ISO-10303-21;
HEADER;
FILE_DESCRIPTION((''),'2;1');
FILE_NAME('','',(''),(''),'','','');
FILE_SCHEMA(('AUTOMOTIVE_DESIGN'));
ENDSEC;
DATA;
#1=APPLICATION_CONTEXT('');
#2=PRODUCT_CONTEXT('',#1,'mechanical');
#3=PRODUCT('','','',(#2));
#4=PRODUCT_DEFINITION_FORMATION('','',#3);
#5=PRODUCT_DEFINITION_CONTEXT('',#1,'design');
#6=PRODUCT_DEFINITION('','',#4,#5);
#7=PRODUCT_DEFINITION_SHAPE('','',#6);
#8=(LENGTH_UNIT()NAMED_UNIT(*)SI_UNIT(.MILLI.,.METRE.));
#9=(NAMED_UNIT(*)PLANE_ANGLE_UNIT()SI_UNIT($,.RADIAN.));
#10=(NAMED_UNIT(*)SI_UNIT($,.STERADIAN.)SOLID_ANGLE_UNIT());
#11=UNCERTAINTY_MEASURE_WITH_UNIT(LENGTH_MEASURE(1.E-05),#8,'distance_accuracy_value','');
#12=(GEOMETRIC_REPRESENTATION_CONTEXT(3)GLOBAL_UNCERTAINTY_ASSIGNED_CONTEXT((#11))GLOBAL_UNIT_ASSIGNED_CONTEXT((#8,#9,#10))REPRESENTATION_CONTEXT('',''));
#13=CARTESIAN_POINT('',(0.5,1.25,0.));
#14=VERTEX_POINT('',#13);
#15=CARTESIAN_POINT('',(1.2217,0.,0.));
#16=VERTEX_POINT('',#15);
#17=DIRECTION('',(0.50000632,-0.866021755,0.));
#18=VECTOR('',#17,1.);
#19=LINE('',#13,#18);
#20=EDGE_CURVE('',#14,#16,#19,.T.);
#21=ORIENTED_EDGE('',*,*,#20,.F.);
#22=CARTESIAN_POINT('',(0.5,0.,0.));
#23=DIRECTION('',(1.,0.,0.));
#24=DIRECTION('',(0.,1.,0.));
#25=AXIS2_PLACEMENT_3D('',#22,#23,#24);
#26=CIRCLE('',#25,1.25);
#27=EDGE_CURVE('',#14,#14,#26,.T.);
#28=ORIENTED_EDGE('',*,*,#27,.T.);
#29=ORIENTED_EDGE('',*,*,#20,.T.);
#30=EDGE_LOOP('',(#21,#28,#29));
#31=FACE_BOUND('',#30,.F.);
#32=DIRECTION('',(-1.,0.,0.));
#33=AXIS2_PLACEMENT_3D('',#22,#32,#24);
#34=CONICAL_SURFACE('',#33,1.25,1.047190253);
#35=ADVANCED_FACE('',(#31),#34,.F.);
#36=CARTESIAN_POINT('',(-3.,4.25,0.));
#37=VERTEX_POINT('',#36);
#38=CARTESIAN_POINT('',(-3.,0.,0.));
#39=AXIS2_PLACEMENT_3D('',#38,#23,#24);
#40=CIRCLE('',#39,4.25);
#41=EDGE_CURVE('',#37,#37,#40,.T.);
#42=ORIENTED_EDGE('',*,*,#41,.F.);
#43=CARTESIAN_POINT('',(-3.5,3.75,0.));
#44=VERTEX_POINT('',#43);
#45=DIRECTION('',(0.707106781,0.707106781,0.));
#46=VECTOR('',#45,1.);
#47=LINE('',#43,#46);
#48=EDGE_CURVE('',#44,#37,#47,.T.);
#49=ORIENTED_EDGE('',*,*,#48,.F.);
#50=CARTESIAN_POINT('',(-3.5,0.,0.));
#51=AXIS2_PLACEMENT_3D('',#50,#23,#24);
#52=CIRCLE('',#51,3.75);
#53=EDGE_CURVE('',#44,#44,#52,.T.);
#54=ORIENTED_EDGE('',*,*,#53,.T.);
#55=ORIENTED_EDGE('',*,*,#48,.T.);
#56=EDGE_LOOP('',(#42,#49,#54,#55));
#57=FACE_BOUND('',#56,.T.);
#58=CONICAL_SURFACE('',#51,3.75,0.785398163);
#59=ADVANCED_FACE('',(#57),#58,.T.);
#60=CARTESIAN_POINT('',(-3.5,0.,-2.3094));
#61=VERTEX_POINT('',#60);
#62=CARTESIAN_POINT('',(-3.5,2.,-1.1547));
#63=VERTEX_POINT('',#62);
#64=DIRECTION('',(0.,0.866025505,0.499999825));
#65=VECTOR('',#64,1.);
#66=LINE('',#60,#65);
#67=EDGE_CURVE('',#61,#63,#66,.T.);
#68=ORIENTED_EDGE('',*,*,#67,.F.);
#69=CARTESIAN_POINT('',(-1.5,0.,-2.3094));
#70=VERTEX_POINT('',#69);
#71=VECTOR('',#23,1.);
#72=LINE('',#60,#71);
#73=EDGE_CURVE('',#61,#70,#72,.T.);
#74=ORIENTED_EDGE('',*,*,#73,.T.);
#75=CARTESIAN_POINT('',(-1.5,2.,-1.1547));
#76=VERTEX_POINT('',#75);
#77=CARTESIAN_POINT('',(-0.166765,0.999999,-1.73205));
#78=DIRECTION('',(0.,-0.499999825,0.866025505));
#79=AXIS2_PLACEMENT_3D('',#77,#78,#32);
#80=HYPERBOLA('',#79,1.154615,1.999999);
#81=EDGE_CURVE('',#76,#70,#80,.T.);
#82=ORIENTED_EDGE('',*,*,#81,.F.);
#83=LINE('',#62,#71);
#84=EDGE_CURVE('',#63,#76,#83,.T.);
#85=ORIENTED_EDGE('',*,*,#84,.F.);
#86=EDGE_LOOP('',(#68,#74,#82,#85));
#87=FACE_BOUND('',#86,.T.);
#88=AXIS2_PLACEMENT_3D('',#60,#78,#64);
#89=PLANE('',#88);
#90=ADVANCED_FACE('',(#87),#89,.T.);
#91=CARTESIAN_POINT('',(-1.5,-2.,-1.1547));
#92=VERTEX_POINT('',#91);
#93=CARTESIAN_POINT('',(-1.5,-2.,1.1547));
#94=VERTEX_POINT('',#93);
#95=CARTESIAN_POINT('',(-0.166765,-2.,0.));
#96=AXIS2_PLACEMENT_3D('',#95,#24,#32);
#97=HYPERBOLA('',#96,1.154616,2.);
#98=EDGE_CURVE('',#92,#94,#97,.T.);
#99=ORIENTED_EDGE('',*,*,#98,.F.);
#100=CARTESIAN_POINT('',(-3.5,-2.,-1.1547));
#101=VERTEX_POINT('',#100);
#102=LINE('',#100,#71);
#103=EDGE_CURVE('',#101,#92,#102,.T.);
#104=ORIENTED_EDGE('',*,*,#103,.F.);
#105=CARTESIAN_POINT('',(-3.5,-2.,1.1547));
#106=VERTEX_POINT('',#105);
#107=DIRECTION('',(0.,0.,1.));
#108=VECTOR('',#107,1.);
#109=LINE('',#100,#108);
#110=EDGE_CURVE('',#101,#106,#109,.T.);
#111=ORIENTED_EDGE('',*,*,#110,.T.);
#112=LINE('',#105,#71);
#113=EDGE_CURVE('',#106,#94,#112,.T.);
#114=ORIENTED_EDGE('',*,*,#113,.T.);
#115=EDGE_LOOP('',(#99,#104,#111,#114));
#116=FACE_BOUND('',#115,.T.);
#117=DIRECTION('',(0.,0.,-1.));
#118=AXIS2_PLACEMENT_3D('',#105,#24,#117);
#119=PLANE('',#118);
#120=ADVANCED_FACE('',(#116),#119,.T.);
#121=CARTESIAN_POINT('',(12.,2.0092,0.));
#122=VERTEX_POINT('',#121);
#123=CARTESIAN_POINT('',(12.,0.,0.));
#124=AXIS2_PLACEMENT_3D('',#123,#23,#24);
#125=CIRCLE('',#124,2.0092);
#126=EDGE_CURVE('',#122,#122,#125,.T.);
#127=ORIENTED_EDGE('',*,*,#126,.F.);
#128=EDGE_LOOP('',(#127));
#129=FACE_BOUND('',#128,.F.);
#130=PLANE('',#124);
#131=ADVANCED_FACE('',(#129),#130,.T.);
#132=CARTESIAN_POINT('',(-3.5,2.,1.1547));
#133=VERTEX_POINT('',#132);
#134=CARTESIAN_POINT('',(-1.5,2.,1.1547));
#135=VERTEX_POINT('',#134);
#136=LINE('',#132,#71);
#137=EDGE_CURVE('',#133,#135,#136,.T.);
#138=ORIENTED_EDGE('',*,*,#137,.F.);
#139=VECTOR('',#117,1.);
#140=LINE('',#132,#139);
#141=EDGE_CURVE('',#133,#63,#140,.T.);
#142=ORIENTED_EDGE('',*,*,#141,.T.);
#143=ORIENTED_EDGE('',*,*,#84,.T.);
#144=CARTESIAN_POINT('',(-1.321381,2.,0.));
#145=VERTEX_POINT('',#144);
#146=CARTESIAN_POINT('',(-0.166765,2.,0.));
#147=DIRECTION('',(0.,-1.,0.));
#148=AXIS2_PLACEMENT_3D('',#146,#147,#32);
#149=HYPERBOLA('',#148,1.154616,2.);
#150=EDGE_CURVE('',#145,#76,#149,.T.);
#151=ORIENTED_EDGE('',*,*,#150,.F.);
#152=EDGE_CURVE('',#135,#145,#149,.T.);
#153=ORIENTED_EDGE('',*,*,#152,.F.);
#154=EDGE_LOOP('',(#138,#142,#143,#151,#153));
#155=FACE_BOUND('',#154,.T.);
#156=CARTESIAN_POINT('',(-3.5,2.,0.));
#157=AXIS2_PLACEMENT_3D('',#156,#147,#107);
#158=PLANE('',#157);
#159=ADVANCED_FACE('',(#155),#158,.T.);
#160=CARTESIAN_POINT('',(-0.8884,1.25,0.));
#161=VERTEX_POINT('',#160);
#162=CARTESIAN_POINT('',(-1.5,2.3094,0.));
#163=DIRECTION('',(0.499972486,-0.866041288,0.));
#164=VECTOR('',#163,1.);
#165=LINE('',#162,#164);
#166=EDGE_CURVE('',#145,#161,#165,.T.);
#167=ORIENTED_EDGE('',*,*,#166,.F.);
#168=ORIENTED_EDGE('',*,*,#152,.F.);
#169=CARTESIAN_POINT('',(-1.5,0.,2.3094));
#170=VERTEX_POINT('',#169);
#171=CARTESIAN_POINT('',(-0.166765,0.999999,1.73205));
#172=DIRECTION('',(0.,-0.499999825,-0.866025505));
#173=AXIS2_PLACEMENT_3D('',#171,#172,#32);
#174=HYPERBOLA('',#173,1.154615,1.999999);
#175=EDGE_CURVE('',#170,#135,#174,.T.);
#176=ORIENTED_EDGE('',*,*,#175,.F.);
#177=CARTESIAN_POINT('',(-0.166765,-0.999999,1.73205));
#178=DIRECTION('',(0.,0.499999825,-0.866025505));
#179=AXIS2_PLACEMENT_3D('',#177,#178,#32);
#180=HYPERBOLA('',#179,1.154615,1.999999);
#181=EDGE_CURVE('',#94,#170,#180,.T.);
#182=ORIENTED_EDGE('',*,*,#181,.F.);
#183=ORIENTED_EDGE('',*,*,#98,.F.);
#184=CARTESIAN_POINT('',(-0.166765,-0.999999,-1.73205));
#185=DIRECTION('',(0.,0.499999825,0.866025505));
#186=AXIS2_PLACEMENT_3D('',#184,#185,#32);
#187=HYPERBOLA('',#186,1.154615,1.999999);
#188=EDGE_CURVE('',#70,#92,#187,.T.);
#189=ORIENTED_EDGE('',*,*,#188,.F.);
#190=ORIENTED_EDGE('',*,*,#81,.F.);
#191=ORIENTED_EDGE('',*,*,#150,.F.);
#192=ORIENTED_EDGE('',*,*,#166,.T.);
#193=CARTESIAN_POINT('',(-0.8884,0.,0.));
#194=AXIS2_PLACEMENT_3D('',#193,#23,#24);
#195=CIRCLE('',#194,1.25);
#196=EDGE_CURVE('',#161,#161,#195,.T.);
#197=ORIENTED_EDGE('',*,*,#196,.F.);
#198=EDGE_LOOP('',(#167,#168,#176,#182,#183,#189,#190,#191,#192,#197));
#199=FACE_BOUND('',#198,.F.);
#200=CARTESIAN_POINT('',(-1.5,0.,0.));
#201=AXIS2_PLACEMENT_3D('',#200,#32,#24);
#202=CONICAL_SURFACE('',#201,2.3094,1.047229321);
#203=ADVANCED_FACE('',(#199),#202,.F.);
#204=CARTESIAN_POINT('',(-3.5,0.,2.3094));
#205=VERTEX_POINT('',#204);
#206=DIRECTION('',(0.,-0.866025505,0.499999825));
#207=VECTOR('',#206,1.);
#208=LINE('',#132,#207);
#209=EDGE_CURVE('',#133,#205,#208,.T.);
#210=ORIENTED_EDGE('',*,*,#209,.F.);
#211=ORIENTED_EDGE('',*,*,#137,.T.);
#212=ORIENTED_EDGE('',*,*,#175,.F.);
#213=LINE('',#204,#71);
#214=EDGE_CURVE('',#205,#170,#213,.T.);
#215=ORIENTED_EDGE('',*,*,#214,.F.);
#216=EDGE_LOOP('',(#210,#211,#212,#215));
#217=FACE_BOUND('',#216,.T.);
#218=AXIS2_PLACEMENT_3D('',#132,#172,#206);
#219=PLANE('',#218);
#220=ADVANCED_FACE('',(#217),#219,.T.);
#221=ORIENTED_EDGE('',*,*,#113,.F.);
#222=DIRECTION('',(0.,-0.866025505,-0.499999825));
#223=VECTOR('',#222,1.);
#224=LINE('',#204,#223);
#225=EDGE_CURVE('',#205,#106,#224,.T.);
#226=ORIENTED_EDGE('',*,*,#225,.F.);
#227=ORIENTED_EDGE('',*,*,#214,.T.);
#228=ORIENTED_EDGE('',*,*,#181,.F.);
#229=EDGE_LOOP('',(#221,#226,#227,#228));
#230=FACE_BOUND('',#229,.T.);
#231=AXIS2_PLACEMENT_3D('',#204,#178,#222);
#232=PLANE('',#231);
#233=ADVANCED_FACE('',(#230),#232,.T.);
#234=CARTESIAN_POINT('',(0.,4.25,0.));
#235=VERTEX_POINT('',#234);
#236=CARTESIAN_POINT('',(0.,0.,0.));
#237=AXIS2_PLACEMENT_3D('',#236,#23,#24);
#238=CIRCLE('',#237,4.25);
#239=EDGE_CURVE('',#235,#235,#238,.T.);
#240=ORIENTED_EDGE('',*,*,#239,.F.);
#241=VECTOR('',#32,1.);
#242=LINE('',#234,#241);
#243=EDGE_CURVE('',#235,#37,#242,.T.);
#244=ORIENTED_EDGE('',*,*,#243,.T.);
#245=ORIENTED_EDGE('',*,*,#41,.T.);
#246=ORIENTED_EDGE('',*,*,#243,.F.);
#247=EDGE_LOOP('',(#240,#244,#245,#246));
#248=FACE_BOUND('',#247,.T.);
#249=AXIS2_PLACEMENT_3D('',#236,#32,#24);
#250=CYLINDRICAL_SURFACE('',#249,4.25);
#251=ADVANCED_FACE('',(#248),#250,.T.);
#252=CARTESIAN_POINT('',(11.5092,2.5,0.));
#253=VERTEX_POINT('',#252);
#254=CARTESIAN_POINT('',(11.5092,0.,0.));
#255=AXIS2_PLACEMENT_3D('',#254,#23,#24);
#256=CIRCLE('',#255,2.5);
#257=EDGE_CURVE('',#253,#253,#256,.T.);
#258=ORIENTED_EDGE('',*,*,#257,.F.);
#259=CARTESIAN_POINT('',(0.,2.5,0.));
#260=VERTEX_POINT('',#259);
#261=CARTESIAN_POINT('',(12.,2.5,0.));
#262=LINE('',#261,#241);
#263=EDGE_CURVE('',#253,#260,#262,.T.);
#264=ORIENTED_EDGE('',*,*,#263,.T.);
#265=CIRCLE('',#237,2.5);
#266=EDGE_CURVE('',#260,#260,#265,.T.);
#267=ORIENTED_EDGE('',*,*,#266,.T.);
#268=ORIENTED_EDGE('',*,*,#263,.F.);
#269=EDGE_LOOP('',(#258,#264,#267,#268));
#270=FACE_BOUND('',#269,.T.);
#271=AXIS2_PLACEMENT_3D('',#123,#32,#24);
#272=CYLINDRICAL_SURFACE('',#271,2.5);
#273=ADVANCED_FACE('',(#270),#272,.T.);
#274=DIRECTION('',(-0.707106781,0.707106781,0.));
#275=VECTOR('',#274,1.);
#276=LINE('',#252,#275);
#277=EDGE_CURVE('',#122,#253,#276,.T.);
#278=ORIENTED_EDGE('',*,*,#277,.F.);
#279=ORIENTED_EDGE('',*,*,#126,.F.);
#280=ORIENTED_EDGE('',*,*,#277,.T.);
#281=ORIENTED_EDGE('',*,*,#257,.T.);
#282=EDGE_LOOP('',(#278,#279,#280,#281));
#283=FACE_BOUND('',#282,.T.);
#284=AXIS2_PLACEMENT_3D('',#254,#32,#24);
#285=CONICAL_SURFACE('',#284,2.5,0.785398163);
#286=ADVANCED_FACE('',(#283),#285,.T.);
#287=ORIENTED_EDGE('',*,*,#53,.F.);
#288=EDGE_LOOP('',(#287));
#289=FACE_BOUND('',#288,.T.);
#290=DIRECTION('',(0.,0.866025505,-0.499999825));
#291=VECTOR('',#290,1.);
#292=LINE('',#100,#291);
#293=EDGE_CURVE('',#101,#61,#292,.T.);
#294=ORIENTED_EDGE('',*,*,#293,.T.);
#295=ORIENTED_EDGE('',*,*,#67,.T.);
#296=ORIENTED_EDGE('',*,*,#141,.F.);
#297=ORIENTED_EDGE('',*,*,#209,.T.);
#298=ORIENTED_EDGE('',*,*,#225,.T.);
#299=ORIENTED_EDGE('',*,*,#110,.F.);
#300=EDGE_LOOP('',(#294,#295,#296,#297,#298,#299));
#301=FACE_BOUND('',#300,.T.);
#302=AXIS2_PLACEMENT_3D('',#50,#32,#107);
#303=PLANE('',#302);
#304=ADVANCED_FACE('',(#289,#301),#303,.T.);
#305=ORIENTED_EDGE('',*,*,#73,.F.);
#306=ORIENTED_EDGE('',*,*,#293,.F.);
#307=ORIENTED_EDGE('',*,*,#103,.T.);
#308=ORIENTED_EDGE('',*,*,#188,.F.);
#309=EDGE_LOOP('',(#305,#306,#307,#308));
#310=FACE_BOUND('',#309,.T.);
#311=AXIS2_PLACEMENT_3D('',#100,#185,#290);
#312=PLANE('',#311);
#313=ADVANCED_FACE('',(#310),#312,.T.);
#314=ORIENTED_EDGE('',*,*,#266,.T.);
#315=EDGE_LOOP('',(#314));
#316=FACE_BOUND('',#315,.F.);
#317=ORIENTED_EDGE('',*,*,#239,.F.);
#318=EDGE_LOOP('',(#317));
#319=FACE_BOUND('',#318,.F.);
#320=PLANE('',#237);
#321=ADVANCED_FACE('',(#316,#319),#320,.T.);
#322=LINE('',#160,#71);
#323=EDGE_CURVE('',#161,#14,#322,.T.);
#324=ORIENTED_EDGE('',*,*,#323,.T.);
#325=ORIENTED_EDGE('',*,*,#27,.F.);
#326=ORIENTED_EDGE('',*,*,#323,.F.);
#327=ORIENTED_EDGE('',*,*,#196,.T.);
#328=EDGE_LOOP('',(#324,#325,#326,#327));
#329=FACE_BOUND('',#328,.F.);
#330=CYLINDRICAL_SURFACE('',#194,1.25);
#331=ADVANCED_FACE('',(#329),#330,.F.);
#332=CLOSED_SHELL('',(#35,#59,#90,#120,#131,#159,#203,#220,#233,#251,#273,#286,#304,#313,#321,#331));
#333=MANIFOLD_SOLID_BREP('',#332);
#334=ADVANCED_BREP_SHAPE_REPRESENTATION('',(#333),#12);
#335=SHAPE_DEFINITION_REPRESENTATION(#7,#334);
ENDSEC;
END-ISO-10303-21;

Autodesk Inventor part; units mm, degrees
ref_plane "YZ Plane" through (0, 0, 0) normal (1, 0, 0) x (0, 1, 0)
ref_plane "XZ Plane" through (0, 0, 0) normal (0, 1, 0) x (-1, 0, 0)
sketch "Sketch1" plane through (0, 0, 0) normal (0, 0, 1) x (1, 0, 0)
  line L0 (1.2217, 0) -> (12, 0)
  line L1 (12, 0) -> (12, 2.5)
  line L2 (12, 2.5) -> (0, 2.5)
  line L3 (0, 2.5) -> (0, 4.25)
  line L4 (0, 4.25) -> (-3.5, 4.25)
  line L5 (-3.5, 4.25) -> (-3.5, 2.3094)
  line L6 (-3.5, 2.3094) -> (-1.5, 2.3094)
  line L7 (-1.5, 2.3094) -> (-0.8884, 1.25)
  line L8 (-6.6, 0) -> (15.1, 0) projected
  line L9 (0, -0.85) -> (0, 5.1) projected
  line L10 (-0.8884, 1.25) -> (0.5, 1.25)
  line L11 (0.5, 1.25) -> (1.2217, 0)
  line L12 (-3.5, 2.3094) -> (-3.5, 0) construction
  line L13 (-3.5, 3.75) -> (-3, 4.25)
  dimension "d0" = 3.5
  dimension "d1" = 2
  dimension "d2" = 60
  dimension "d3" = 5
  dimension "d4" = 4.6188
  dimension "d5" = 8.5
  dimension "d15" = 4
  dimension "d16" = 2.5
  dimension "d17" = 12
  dimension "d32" = 45
  dimension "d33" = 0.5
revolve "Body" add sketch "Sketch1" angle 360 about axis through (1.2217, 0, 0) along (1, 0, 0) contours L11 L10 L9 L2 L1 L0 | L10 L7 L6 L5 L13 L4 L3 L9 | L13 L5 L4
revolve "Chamfer2" cut sketch "Sketch1" angle 360 about axis through (-10, 0, 0) along (1, 0, 0) contours L13 L5 L4
sketch "Sketch2" plane through (-3.5, 0, 0) normal (-1, 0, 0) x (0, 0, 1)
  circle A0 centre (0, 0) radius 2.3094 projected
  line L0 (0, -5.95) -> (0, 5.95) projected
  line L1 (-5.95, 0) -> (5.95, 0) projected
  line L2 (2.3094, 0) -> (1.1547, -2)
  line L3 (1.1547, -2) -> (-1.1547, -2)
  line L4 (-1.1547, -2) -> (-2.3094, 0)
  line L5 (-2.3094, 0) -> (-1.1547, 2)
  line L6 (-1.1547, 2) -> (1.1547, 2)
  line L7 (1.1547, 2) -> (2.3094, 0)
extrude "Slot" add sketch "Sketch2" against normal up to next contours L7 A0 | A0 L2 | L6 L0 A0 | A0 L0 L3 | L0 L6 A0 | A0 L3 L0 | L4 A0 | A0 L5
thread "Thread" size "M5x0.8" class "6g" standard "ISO Metric profile" length 7.8
chamfer "Chamfer1" distance 0.4908 distance2 0.4908 1 edges at (12, -2.5, 0) measured on face at (12, -0.7741, -0.6858)
ref_plane "Work Plane1" through (6, 0, 0) normal (0, 0.5, 0.8660254) x (1, 0, 0)
equation "\"d0\" = KOH"
equation "\"d1\" = INTI"
equation "\"d3\" = GD"
equation "\"d4\" = 1.1547 * SW"
equation "\"d5\" = KOD"
equation "\"d15\" = INFT"
equation "\"d16\" = SDT"
equation "\"d17\" = NLG"
equation "\"d33\" = Cham"
equation "\"d7\" = GEL"
equation "\"d9\" = -0.5 * SPD + 0.5 * GD"
equation "\"d12\" = GUL"
equation "\"GD\" = NND"
equation "\"NLG\" = 12"
equation "\"GEL\" = 7.8"
equation "\"KOD\" = 8.5"
equation "\"KOH\" = 3.5"
equation "\"GUL\" = 0.61345 * PTC"
equation "\"SW\" = 4"
equation "\"INTI\" = 2"
equation "\"SPD\" = NND - 1.2269 * PTC"
equation "\"SDT\" = 2.5"
equation "\"INFT\" = 4"
equation "\"Cham\" = 0.5"
equation "\"TOA\" = 30deg"
equation "\"GD1\" = THREADDIA - 1.2269 * PTC"
equation "\"THREADDIA\" = 5"
equation "\"BDM\" = NND"
equation "\"FAWI\" = 45deg"
equation "\"RR\" = 0.1 * NND"
equation "\"PTC\" = 0.8"
equation "\"NND\" = 5"
equation "\"FAWI1\" = 45deg"
equation "\"GAL\" = 0.61345 * PTC"
equation "\"E0\" = 1.155 * SW"
properties part number "DIN 6912 - M5 x 12" material "Steel, Mild"
